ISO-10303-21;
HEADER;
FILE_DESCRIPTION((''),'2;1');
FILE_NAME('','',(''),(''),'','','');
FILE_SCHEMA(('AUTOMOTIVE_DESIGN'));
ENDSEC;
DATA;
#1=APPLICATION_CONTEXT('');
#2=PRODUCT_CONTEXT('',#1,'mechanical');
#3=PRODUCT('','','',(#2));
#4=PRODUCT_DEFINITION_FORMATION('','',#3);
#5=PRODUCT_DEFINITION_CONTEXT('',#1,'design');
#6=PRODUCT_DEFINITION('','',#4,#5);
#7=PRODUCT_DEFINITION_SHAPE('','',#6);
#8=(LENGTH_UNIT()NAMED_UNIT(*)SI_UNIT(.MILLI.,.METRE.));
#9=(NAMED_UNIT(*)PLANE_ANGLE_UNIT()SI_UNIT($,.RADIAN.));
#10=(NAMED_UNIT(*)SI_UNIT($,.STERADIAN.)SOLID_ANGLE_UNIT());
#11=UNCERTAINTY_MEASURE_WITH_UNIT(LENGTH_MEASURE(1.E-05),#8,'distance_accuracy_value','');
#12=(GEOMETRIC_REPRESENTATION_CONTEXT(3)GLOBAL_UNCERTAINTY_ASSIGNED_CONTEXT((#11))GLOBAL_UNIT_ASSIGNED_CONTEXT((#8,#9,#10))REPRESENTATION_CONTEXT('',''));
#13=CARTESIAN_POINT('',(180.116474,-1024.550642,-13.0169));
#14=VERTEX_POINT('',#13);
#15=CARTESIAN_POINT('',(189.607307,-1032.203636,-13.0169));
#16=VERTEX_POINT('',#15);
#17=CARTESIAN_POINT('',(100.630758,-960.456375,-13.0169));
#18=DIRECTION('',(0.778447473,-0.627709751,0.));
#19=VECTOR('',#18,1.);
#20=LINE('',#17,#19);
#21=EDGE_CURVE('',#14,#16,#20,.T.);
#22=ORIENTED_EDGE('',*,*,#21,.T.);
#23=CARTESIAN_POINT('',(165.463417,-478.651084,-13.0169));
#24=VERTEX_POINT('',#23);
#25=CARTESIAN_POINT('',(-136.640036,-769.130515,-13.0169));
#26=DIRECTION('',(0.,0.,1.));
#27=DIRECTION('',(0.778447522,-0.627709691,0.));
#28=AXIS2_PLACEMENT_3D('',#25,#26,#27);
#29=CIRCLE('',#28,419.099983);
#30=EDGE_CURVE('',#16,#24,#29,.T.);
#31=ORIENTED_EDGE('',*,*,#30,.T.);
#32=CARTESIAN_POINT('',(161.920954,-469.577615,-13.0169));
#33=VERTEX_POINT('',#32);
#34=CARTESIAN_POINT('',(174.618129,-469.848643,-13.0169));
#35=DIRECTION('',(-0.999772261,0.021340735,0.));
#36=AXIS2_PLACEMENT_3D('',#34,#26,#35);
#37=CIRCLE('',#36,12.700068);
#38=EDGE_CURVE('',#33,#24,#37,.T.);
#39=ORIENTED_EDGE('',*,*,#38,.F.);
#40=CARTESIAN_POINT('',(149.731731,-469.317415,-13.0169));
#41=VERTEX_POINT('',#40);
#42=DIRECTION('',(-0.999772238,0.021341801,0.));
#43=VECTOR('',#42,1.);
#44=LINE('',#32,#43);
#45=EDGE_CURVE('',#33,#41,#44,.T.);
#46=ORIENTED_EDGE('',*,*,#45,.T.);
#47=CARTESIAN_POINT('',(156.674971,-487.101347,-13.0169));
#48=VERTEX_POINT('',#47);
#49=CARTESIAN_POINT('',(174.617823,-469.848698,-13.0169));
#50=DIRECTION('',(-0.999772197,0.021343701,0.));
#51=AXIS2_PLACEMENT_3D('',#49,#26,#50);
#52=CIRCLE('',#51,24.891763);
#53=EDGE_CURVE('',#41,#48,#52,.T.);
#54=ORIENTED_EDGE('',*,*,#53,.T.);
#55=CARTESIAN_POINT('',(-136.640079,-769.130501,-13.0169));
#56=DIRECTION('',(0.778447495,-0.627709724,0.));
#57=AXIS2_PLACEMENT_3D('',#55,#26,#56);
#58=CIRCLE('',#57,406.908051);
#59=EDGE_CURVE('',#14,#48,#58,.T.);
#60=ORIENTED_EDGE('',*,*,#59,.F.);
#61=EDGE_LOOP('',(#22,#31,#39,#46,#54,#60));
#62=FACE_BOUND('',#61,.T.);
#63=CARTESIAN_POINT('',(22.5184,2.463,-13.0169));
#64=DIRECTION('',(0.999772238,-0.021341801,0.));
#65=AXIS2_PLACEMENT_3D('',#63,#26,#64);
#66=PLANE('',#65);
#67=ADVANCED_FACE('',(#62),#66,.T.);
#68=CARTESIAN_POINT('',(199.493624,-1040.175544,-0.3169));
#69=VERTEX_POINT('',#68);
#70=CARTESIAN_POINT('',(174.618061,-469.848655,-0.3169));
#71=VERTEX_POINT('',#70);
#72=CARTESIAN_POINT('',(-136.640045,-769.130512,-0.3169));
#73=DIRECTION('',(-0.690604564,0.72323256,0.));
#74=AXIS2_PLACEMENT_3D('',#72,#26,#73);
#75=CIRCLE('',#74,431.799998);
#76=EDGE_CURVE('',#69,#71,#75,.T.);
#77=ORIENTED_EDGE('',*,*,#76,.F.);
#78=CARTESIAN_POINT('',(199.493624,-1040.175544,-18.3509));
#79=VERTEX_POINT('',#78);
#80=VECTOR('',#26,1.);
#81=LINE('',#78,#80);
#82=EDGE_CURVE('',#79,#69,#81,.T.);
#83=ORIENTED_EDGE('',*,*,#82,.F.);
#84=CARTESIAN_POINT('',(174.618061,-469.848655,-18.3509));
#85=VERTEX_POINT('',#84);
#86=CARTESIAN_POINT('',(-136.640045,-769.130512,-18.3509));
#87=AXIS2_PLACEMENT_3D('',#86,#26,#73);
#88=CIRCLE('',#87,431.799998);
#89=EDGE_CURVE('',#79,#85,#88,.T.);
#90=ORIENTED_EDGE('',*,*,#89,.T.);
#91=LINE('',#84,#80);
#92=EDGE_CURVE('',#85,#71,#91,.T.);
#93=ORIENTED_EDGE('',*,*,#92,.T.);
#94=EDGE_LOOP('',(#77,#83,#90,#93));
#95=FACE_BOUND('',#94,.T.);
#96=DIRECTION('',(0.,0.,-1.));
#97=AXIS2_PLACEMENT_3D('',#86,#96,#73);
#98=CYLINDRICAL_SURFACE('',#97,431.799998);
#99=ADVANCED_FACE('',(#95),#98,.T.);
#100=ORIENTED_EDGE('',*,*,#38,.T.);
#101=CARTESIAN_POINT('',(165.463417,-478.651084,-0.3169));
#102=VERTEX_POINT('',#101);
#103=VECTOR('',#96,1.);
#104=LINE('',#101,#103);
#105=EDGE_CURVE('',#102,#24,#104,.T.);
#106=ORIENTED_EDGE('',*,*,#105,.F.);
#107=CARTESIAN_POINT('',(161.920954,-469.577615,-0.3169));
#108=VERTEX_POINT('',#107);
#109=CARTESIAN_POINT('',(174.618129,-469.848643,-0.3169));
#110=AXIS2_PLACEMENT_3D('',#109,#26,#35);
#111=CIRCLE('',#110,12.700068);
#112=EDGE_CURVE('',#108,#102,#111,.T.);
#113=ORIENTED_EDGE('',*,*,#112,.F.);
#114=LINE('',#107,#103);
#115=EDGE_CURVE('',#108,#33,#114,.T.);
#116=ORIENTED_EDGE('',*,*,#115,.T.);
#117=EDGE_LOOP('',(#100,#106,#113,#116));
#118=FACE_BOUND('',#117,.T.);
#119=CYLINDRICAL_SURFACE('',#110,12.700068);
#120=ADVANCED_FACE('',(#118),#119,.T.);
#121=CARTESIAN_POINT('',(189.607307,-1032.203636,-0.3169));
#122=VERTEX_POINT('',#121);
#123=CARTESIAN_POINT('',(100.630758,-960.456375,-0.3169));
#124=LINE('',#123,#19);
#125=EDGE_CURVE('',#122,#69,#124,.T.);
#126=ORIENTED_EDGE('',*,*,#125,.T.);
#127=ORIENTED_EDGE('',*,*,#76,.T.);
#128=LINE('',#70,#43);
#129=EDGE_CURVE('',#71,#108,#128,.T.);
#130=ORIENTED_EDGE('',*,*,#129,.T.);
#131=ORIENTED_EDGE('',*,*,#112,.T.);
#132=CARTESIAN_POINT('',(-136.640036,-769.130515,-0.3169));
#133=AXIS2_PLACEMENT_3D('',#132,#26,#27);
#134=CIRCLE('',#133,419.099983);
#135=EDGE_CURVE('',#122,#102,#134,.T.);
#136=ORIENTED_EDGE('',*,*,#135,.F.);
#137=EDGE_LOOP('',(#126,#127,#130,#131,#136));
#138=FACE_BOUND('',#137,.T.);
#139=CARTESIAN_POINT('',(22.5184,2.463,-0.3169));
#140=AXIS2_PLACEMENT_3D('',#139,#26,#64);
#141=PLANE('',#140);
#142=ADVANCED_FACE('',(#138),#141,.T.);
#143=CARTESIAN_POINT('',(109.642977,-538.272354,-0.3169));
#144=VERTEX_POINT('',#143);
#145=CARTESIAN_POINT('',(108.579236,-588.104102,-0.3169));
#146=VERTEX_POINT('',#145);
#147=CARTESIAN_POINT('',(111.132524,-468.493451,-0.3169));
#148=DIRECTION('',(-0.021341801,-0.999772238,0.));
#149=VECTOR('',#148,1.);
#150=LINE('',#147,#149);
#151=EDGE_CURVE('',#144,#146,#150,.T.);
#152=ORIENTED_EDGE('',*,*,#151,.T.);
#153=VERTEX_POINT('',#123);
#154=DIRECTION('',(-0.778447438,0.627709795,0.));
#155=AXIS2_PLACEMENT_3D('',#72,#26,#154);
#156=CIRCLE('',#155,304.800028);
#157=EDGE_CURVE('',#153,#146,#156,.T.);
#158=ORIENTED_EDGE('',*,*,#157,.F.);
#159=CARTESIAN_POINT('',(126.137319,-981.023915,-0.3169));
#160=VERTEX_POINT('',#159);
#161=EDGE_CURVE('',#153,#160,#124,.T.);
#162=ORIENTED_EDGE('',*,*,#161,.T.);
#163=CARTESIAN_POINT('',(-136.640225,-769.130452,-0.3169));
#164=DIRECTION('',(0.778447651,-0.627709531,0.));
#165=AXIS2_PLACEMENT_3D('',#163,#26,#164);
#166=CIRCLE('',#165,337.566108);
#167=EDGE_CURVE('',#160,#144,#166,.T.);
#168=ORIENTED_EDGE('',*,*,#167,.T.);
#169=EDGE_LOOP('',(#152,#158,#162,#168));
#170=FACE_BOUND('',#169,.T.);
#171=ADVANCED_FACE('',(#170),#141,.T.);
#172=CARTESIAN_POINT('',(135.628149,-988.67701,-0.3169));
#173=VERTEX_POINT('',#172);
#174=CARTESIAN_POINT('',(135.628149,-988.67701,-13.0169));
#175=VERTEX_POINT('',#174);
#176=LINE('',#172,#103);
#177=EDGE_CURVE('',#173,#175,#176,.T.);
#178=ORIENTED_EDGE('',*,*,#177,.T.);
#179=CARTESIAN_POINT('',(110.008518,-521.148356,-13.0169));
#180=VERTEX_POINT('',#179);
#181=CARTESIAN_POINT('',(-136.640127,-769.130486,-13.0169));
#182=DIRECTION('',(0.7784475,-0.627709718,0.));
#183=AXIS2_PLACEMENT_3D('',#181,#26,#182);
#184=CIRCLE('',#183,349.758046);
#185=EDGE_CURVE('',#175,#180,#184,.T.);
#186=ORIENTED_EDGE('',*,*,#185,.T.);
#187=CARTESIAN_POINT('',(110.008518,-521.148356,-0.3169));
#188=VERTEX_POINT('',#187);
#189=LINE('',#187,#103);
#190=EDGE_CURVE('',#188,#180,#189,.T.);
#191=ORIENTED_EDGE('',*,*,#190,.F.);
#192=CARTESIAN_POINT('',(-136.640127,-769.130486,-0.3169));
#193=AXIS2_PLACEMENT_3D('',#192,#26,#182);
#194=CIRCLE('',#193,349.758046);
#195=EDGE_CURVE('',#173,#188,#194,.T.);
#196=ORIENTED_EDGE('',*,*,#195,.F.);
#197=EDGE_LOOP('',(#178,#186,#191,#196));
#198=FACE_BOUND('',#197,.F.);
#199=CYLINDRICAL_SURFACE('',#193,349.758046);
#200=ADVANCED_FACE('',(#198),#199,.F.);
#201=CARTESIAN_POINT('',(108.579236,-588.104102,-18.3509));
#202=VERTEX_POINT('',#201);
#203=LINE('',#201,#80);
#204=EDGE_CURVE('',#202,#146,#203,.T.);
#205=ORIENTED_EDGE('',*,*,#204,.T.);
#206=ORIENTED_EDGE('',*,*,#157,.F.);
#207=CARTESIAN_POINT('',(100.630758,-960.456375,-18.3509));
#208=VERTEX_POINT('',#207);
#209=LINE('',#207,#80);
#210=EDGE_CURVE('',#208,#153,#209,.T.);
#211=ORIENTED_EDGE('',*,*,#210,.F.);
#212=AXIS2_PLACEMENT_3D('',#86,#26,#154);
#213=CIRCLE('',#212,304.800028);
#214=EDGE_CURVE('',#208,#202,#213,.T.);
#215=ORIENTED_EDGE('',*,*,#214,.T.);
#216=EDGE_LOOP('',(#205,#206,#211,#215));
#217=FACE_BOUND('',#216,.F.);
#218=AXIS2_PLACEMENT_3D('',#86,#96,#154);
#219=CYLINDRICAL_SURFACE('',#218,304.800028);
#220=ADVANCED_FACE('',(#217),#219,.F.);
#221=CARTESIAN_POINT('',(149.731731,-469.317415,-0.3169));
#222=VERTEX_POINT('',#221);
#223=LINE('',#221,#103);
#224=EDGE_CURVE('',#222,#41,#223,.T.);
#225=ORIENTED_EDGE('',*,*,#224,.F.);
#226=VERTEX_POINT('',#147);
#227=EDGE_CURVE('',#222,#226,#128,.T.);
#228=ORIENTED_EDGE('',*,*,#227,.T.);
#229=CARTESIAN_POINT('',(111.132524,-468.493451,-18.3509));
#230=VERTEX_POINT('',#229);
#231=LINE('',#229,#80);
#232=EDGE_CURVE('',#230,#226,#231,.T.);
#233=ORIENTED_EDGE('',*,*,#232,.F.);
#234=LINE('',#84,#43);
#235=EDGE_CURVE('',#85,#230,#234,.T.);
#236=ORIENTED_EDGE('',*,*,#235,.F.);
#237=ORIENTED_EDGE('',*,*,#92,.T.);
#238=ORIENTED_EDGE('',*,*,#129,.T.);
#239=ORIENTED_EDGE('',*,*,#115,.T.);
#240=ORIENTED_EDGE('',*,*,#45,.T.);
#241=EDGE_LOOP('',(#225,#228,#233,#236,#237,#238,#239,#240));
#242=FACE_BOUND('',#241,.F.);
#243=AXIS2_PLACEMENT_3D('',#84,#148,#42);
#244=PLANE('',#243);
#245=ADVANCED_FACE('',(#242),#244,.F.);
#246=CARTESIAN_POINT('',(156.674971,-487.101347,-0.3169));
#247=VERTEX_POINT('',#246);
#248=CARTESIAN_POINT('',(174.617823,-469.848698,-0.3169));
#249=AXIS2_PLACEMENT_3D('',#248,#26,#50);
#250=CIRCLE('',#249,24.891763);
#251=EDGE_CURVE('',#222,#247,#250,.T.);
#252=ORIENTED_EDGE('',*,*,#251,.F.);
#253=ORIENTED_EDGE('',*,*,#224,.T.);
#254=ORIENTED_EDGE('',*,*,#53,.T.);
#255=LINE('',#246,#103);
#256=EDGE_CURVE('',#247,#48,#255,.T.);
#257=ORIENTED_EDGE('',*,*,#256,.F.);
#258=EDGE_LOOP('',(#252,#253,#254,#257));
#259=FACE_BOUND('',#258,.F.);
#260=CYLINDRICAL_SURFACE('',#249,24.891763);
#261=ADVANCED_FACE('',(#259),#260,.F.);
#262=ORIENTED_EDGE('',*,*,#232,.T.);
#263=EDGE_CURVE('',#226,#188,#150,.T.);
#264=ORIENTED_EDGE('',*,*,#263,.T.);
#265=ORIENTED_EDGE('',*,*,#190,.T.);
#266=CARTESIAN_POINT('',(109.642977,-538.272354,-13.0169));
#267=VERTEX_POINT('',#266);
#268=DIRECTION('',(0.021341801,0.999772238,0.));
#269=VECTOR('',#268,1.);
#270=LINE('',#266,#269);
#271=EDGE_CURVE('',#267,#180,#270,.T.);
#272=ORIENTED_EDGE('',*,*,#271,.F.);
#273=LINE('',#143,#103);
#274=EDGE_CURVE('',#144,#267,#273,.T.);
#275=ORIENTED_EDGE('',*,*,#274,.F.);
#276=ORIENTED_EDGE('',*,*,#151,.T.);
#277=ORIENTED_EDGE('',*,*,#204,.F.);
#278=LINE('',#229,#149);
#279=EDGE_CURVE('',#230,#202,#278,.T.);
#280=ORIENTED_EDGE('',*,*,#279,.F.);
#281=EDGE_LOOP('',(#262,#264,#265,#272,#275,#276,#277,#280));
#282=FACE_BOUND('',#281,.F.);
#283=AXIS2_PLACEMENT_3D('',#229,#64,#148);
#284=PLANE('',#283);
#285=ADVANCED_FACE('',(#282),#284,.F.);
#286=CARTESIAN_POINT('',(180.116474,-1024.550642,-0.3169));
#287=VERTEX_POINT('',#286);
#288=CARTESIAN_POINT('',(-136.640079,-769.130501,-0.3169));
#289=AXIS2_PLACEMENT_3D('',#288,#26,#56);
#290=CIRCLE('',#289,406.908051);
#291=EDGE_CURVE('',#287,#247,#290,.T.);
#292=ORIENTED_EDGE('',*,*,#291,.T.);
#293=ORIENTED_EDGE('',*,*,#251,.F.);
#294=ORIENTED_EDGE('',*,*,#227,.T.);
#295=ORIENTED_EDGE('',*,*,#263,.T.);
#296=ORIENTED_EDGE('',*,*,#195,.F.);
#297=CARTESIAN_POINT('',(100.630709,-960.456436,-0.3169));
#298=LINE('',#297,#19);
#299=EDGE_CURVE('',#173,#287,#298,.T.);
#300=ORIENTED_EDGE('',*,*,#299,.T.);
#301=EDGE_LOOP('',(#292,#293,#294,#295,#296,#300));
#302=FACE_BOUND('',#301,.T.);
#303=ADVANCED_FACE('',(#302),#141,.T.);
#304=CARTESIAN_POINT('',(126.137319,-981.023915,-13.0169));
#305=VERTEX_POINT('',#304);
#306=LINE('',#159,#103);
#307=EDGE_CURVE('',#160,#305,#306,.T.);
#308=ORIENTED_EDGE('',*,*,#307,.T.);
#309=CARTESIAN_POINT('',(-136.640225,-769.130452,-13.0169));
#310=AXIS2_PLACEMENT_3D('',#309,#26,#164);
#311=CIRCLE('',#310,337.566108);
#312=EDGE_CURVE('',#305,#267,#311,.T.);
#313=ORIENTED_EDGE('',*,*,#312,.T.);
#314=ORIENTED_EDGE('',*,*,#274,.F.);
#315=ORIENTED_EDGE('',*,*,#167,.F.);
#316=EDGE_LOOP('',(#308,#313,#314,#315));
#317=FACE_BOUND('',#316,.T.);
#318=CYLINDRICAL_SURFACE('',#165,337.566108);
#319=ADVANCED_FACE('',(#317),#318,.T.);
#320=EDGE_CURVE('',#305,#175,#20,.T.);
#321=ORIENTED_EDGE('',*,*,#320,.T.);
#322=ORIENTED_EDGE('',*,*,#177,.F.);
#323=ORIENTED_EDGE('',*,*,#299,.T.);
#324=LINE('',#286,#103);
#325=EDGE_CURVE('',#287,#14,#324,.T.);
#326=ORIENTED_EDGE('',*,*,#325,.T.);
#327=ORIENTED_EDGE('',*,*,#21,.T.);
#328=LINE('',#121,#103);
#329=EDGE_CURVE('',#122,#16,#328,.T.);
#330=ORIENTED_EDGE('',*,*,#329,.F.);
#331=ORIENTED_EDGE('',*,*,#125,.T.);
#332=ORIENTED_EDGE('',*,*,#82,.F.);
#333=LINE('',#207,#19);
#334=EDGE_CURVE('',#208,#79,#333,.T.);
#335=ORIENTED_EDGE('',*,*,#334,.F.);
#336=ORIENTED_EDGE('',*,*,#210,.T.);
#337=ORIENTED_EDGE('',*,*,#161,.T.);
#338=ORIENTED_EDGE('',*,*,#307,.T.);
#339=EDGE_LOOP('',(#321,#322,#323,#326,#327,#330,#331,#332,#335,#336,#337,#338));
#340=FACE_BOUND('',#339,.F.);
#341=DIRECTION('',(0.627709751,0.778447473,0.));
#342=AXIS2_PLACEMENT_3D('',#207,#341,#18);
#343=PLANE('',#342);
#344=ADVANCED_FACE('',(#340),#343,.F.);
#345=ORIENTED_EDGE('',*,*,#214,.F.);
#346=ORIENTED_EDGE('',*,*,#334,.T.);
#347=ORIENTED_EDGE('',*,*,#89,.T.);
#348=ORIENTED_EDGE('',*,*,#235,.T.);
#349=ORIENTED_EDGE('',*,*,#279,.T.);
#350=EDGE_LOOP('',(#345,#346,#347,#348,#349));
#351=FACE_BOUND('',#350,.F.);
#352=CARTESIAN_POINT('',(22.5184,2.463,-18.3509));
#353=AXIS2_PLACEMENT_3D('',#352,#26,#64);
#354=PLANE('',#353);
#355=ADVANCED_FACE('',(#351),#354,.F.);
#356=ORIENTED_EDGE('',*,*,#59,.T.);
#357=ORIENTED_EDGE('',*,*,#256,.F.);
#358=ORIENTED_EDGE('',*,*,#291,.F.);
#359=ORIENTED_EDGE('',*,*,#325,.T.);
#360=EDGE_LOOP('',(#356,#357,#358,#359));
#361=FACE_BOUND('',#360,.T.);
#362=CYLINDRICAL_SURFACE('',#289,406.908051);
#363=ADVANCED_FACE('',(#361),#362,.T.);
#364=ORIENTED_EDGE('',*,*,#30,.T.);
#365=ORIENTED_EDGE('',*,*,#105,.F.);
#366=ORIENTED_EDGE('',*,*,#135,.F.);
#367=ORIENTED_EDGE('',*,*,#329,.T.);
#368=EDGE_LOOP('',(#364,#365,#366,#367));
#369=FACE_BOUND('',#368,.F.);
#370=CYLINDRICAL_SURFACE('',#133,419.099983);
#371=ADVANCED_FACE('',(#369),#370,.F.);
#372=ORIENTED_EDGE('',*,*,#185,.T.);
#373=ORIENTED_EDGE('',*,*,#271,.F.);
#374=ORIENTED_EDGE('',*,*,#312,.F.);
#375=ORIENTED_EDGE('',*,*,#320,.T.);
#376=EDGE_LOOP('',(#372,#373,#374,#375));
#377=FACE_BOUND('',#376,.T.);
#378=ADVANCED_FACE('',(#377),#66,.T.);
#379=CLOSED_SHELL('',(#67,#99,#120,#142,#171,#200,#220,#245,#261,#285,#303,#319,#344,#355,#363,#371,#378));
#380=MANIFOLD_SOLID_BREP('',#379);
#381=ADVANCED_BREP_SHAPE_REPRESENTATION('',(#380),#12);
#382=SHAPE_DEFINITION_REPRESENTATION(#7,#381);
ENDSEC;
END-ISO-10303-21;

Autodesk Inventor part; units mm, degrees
ref_plane "YZ Plane" through (0, 0, 0) normal (1, 0, 0) x (0, 1, 0)
ref_plane "XZ Plane" through (0, 0, 0) normal (0, 1, 0) x (-1, 0, 0)
ref_plane "Work Plane1" through (22.5184, 2.463, -18.3509) normal (0, 0, 1) x (0.9997722, -0.0213418, 0)
sketch "ThermoBulbBorder" plane through (22.5184, 2.463, -18.3509) normal (0, 0, 1) x (0.9997722, -0.0213418, 0)
  arc A0 (-447.455, -468.958) -> (162.145, -468.958) centre (-142.655, -774.8145) ccw
  arc A1 (-447.455, -468.958) -> (162.145, -468.958) centre (-142.655, -774.8145) ccw
  arc A2 (-383.955, -588.5959) -> (98.645, -588.5959) centre (-142.655, -774.8145) ccw
  line L0 (-447.455, -468.958) -> (-383.955, -468.958)
  line L1 (-383.955, -468.958) -> (-383.955, -588.5959)
  line L2 (162.145, -468.958) -> (98.645, -468.958)
  line L3 (98.645, -468.958) -> (98.645, -588.5959)
  line L4 (-383.955, -961.033) -> (-484.4967, -1038.6241)
  line L5 (98.645, -961.033) -> (199.1867, -1038.6241)
  arc A3 (-447.455, -468.958) -> (162.145, -468.958) centre (-142.655, -774.8145) ccw projected
  circle A4 centre (-142.655, -774.8145) radius 419.1 construction
  circle A5 centre (-142.655, -774.8145) radius 410.972 construction
  circle A6 centre (-142.655, -774.8145) radius 353.822 construction
  circle A7 centre (-142.655, -774.8145) radius 345.694 construction
  line L6 (98.645, -468.958) -> (98.645, -316.558) construction
  line L7 (-383.955, -468.958) -> (-383.955, -316.558) construction
  dimension "d0" = 609.6
  dimension "d5" = 63.5
  dimension "d6" = 63.5
  dimension "d7" = 838.2
  dimension "d8" = 8.128
  dimension "d9" = 8.128
  dimension "d10" = 57.15
  dimension "d11" = 40.894
  dimension "d12" = 152.4
extrude "Extrusion3" add sketch "ThermoBulbBorder" along normal blind 18.034 contours L5 A2 L3 L2 A0
sketch "Sketch2" plane through (22.5184, 2.463, -0.3169) normal (0, 0, 1) x (0.9997722, -0.0213418, 0)
  line L0 (149.445, -468.958) -> (137.253, -468.958)
  arc A0 (199.1867, -1038.6241) -> (162.145, -468.958) centre (-142.655, -774.8145) ccw projected
  arc A1 (124.5847, -981.0515) -> (98.645, -538.7528) centre (-142.655, -774.8145) ccw
  arc A2 (134.2367, -988.5003) -> (98.645, -521.6249) centre (-142.655, -774.8145) ccw
  arc A3 (179.4805, -1023.4163) -> (144.5742, -486.5897) centre (-142.655, -774.8145) ccw
  arc A4 (189.1325, -1030.865) -> (153.1803, -477.9538) centre (-142.655, -774.8145) ccw
  line L1 (162.145, -468.958) -> (98.645, -468.958) projected
  line L2 (98.645, -961.033) -> (199.1867, -1038.6241) projected
  line L3 (98.645, -538.7528) -> (98.645, -521.6249)
  line L4 (98.645, -468.958) -> (98.645, -588.5959) projected
  line L5 (124.5847, -981.0515) -> (134.2367, -988.5003)
  line L6 (179.4805, -1023.4163) -> (189.1325, -1030.865)
  line L7 (149.445, -468.958) -> (149.445, -443.558) construction
  arc A5 (149.445, -468.958) -> (153.1803, -477.9538) centre (162.145, -468.958) ccw
  line L8 (137.253, -468.958) -> (137.253, -443.558) construction
  arc A6 (137.253, -468.958) -> (144.5742, -486.5897) centre (162.145, -468.958) ccw
  point P0 (-22.4607, -2.943)
  dimension "d17" = 12.7
  dimension "bRopeChannel" = 12.192
  dimension "d19" = 12.192
  dimension "d20" = 57.15
  dimension "d23" = 12.7
  dimension "d24" = 25.4
  dimension "d25" = 12.192
extrude "Extrusion4" cut sketch "Sketch2" against normal blind 12.7 contours A5 A4 L2 A3 A6 L0 | A2 L2 A1 L3
equation "\"d6\" = d5"
equation "\"d8\" = sRopeChannel"
equation "\"d9\" = sRopeChannel"
equation "\"d19\" = bRopeChannel"
equation "\"d23\" = d17"
equation "\"sRopeChannel\" = 8.128"
properties part number "HOT Thermo bulb outline R" material "Rubber, Butyl"
